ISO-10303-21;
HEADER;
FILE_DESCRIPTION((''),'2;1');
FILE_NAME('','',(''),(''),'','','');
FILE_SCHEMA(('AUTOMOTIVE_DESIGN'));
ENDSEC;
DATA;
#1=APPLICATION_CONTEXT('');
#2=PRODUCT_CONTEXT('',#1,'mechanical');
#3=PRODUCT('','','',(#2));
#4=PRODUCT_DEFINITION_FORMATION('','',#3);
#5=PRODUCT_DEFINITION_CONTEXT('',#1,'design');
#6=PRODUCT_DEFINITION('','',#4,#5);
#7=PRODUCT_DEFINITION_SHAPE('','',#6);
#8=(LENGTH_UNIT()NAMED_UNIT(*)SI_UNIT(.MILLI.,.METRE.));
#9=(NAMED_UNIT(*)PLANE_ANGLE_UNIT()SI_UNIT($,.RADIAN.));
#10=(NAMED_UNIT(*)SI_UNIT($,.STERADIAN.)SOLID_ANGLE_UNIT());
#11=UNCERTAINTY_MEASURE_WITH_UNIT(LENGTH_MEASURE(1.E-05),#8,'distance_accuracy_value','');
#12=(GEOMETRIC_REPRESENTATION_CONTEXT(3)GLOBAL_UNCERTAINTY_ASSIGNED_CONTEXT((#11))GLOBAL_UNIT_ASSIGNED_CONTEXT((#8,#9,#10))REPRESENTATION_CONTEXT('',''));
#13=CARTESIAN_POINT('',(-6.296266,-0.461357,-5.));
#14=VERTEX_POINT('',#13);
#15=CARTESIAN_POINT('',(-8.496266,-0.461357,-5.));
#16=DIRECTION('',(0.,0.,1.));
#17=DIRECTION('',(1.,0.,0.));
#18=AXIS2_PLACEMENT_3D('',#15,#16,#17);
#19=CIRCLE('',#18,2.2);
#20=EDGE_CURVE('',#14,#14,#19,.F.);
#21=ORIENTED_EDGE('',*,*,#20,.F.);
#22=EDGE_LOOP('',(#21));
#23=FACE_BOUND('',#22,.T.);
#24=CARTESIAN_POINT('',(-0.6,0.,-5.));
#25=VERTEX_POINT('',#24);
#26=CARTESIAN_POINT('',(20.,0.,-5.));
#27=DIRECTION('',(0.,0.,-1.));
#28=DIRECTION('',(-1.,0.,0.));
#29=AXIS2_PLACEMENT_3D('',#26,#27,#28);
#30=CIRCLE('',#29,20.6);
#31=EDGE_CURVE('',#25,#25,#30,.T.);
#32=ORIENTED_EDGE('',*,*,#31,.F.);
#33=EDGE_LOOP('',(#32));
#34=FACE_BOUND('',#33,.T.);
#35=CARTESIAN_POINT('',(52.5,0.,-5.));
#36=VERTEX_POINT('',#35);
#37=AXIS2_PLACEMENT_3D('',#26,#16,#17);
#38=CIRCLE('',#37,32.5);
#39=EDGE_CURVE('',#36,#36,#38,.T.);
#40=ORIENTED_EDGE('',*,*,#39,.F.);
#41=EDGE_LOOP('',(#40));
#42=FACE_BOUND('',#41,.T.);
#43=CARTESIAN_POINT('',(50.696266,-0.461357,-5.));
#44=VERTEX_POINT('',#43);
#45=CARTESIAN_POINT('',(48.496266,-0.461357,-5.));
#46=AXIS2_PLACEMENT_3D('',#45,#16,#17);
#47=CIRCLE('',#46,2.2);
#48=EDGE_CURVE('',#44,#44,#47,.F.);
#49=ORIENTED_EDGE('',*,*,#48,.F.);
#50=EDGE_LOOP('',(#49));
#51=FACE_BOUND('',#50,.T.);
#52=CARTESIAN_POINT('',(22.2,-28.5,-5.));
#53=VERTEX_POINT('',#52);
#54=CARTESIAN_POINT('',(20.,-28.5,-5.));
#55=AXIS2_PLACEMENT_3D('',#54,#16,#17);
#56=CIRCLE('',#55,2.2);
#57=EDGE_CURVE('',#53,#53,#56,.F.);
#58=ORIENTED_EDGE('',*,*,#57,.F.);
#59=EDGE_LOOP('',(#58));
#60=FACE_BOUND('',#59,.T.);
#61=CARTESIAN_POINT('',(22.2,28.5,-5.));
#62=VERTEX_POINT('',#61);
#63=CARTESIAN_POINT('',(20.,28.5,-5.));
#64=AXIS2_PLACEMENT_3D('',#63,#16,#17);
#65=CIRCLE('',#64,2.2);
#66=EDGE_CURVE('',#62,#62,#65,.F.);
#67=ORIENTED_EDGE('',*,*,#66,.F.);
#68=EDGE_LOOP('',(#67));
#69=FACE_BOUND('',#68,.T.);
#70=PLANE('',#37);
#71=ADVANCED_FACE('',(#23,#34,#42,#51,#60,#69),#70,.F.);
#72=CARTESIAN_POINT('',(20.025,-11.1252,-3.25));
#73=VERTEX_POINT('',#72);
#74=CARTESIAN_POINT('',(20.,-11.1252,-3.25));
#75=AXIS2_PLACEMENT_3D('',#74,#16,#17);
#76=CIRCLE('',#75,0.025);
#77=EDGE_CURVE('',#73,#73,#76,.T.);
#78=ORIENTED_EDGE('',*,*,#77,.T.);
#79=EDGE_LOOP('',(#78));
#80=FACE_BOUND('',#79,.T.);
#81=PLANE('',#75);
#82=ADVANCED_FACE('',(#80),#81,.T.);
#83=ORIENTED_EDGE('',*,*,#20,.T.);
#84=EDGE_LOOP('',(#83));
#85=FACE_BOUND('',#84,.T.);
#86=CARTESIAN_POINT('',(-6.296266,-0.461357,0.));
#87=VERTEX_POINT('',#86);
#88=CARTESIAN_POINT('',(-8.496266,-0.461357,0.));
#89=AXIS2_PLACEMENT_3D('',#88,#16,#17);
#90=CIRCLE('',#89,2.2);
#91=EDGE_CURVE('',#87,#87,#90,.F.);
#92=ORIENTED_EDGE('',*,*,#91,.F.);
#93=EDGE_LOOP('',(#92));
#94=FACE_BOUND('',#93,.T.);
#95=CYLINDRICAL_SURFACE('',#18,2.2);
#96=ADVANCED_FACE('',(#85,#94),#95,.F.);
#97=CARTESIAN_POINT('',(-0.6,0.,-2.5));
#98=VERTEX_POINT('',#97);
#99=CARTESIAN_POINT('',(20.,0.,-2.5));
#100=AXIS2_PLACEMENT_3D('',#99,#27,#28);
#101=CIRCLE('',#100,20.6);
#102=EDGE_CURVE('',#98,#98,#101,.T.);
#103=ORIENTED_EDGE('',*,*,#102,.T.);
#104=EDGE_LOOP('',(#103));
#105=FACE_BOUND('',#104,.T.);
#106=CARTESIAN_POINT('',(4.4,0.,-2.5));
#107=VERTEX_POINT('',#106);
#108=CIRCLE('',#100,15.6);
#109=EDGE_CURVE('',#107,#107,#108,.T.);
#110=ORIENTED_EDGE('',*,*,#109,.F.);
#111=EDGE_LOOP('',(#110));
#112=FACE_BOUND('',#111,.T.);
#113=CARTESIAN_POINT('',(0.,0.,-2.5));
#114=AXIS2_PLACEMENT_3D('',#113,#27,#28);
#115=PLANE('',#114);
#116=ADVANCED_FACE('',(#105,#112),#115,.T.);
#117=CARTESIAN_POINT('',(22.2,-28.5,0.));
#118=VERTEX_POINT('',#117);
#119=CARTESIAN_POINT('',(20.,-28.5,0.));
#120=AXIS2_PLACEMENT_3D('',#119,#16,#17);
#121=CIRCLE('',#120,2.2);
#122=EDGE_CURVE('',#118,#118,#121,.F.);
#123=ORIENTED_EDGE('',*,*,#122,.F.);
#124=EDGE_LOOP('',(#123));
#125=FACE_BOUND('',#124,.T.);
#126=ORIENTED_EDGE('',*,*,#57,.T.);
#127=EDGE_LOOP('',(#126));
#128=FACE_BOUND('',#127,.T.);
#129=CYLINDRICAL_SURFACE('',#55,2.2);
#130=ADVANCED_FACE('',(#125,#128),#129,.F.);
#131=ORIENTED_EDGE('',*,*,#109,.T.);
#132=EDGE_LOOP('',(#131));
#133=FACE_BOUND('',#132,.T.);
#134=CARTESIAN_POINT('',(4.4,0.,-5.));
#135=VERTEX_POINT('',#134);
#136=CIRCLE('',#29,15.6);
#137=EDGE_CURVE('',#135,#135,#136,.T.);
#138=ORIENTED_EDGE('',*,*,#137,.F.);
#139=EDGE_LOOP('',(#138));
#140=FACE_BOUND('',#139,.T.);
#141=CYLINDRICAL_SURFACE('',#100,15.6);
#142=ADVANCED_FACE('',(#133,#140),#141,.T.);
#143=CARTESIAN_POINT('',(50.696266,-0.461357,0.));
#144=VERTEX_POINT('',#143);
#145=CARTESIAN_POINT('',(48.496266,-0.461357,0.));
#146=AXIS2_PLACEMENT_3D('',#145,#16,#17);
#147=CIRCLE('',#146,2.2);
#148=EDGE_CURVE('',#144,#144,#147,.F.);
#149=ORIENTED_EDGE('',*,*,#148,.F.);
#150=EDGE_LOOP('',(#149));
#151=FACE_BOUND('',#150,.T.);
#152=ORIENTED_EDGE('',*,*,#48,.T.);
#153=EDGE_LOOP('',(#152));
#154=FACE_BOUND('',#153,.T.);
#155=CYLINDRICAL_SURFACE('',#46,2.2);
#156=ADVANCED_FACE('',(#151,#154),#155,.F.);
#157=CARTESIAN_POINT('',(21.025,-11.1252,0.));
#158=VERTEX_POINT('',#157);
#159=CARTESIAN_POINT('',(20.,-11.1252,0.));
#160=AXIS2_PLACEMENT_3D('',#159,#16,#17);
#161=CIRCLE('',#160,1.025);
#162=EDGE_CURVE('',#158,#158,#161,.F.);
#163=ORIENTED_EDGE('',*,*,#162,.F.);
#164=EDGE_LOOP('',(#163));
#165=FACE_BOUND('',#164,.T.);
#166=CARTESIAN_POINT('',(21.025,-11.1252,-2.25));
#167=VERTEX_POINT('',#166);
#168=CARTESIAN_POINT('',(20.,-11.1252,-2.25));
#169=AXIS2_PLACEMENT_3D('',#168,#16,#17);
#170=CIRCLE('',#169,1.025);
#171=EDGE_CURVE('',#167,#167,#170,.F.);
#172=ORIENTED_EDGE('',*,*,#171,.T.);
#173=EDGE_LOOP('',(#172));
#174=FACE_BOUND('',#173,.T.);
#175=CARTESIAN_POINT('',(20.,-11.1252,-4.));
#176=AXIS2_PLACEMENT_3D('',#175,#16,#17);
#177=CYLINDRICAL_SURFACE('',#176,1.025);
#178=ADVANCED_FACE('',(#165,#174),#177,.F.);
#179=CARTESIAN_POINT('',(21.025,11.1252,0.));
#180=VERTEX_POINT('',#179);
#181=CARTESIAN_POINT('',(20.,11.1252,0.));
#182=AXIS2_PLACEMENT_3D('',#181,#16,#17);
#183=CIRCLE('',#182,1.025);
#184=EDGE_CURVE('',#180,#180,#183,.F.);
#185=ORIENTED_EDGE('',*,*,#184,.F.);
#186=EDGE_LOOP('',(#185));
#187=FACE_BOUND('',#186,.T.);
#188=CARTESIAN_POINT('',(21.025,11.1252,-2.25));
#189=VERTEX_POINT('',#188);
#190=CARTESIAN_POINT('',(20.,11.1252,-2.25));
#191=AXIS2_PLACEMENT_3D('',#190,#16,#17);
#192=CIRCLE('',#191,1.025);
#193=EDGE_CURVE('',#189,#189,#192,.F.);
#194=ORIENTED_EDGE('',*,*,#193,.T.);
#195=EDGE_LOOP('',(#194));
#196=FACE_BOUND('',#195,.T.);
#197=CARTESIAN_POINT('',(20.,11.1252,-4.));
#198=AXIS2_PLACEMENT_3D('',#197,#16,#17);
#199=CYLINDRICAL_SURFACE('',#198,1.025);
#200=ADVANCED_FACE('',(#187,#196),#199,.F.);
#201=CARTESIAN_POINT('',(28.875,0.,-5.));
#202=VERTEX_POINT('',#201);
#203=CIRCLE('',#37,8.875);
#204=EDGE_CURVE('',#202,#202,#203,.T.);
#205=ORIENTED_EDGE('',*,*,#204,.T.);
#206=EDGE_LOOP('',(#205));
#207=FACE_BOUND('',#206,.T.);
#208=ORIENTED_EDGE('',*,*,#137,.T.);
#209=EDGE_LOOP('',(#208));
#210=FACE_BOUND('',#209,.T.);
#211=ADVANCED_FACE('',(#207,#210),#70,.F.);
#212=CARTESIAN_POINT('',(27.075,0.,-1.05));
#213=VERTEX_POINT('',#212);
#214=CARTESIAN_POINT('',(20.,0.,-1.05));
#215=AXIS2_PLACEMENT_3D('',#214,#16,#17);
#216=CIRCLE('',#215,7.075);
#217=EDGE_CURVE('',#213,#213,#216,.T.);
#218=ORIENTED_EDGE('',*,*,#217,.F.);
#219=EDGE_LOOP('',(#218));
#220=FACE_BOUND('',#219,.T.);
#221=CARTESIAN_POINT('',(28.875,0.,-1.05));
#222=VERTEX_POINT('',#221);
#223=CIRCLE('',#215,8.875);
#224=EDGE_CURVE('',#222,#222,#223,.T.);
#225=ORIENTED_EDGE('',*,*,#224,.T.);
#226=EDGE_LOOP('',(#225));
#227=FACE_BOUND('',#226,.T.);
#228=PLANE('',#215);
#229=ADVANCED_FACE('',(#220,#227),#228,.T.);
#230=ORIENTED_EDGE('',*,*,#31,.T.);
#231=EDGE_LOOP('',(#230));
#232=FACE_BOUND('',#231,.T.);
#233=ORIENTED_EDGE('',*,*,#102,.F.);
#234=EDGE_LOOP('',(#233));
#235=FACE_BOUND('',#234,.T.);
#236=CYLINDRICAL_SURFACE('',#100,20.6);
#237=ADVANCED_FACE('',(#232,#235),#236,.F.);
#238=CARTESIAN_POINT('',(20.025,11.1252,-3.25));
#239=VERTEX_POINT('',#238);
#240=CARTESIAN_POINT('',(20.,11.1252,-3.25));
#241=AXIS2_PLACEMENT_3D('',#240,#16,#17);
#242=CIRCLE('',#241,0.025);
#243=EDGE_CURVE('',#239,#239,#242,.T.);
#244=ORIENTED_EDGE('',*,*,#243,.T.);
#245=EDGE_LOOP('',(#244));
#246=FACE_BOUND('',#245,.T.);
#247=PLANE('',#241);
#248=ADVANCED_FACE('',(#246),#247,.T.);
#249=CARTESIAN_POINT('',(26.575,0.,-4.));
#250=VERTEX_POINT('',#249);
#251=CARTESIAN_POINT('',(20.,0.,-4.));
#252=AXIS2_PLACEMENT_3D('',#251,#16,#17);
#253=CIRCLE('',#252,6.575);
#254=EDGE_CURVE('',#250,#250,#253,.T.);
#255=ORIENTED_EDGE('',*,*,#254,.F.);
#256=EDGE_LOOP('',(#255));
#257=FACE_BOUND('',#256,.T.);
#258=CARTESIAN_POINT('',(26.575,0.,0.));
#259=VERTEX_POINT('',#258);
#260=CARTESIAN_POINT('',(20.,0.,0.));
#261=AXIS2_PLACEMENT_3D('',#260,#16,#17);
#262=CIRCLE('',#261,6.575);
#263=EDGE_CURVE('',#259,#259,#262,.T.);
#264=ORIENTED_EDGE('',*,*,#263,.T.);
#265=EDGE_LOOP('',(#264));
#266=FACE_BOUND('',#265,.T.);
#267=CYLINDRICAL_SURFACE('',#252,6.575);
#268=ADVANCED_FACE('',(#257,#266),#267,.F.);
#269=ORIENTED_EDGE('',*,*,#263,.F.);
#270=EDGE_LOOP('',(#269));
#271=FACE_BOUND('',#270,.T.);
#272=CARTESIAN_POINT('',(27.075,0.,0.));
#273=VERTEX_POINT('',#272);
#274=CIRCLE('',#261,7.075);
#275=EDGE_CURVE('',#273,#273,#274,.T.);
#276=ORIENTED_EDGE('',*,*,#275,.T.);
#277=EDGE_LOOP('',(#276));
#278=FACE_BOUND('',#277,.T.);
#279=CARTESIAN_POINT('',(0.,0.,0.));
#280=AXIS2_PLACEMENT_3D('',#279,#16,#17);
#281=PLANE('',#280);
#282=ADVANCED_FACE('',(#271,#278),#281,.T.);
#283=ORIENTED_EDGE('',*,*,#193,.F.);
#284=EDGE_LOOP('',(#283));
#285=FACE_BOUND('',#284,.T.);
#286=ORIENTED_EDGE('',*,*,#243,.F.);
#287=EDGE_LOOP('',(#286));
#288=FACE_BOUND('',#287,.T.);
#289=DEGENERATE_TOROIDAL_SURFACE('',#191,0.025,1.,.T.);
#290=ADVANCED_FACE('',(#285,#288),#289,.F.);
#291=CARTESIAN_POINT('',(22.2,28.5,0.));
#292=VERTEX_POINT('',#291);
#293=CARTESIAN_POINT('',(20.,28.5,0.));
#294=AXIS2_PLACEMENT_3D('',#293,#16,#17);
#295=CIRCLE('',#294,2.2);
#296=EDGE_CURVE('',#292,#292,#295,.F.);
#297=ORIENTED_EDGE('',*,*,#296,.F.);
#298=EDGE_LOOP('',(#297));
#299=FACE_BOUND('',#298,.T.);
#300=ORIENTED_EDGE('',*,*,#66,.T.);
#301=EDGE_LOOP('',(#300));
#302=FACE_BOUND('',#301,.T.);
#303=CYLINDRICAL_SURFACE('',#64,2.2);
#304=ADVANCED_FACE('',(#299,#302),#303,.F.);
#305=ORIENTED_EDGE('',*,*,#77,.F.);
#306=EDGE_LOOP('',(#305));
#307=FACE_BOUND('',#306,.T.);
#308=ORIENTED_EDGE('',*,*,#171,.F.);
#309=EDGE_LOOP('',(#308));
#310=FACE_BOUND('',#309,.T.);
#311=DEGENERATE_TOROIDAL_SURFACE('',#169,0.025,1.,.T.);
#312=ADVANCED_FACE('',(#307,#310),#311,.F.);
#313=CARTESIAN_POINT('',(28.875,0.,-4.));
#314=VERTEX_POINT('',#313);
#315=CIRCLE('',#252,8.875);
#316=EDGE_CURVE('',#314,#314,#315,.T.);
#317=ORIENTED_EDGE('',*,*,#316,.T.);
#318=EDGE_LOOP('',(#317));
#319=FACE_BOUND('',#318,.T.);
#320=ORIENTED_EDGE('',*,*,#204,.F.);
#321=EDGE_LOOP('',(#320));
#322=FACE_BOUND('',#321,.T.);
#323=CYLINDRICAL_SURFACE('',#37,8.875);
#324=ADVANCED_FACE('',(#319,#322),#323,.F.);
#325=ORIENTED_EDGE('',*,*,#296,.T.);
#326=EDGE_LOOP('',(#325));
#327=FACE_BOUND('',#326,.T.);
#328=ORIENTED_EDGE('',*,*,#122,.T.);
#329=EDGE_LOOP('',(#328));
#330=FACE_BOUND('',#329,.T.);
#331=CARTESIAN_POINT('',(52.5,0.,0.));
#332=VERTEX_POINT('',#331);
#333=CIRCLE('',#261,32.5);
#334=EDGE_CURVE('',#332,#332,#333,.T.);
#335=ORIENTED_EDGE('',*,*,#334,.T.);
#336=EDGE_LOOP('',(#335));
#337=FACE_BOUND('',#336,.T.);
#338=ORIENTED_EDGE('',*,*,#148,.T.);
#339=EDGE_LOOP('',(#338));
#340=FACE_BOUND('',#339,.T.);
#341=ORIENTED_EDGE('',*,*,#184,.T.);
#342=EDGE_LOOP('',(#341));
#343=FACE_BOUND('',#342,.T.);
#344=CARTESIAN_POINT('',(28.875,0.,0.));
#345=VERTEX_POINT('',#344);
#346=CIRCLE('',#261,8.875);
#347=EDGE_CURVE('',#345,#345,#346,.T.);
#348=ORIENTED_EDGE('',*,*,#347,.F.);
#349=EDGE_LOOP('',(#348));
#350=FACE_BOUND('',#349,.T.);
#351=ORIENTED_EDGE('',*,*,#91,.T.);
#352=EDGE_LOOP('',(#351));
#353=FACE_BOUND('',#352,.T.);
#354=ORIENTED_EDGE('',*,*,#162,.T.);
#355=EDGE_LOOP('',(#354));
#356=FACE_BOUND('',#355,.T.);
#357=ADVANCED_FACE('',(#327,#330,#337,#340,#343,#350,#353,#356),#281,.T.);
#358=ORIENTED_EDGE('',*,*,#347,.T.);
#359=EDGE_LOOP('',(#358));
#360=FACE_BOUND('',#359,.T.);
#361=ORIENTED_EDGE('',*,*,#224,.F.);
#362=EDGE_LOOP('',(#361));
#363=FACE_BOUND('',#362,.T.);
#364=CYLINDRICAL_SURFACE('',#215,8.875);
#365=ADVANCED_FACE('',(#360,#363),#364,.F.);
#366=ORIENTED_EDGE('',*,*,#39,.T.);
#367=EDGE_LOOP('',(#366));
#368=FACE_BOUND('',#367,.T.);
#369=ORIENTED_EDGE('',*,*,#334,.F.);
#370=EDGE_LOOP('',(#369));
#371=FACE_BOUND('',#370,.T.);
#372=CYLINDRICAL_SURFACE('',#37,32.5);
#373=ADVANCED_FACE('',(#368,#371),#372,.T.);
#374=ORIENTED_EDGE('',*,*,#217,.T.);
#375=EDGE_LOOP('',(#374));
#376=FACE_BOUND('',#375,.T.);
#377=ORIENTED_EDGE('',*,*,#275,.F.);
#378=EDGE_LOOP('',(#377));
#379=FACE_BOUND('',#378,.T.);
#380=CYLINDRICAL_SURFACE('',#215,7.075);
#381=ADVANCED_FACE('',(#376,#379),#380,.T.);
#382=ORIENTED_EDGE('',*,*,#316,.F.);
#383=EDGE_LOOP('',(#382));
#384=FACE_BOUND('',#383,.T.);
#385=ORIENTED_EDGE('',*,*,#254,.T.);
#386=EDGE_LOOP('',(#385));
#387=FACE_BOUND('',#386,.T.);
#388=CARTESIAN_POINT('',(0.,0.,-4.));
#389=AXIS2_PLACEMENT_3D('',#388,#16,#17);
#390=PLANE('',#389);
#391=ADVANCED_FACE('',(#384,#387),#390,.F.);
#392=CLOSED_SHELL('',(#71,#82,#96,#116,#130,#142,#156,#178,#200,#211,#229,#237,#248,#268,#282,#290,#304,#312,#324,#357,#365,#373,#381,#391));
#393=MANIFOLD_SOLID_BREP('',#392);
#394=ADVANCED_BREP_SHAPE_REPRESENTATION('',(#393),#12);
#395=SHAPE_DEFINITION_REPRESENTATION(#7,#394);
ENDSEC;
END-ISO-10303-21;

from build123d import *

# Parameters (mm, degrees)
BOSS_EXTRUDE1_START       = -4
BOSS_EXTRUDE1_OUTLINE_R   = 2.2
BOSS_EXTRUDE1_OUTLINE_R_2 = 1.025
BOSS_EXTRUDE1_OUTLINE_R_3 = 6.575
BOSS_EXTRUDE1_DEPTH       = 4
SKETCH3_R                 = 8.875
SKETCH3_R_2               = 7.075
CUT_EXTRUDE1_DEPTH        = 1.05
BOSS_EXTRUDE2_START       = -4
SKETCH4_R                 = 1.025
BOSS_EXTRUDE2_DEPTH       = 0.75
FILLET1_R                 = 1
BOSS_EXTRUDE3_START       = -5
SKETCH5_R                 = 32.5
SKETCH5_R_2               = 1.025
SKETCH5_R_3               = 8.875
BOSS_EXTRUDE3_DEPTH       = 5
SKETCH6_R                 = 2.2
CUT_EXTRUDE2_DEPTH        = 5
SKETCH7_R                 = 20.6
SKETCH7_R_2               = 15.6
CUT_EXTRUDE3_DEPTH        = 2.5
BOSS_EXTRUDE4_START       = 1
SKETCH8_R                 = 1.025
BOSS_EXTRUDE4_DEPTH       = 1


# Read off the part's stored shape, not the designer's step: Boss-Extrude1
with BuildPart() as part:
    # Boss-Extrude1 outline → Boss-Extrude1 (new body)
    with BuildSketch(Plane.XY.offset(BOSS_EXTRUDE1_START)):
        with BuildLine():
            Line((-5.8, 12.8), (-5.8, -12.8))
            ThreePointArc((-5.8, -12.8), (-1.992388155, -21.992388155), (7.2, -25.8))
            Line((7.2, -25.8), (32.8, -25.8))
            ThreePointArc((32.8, -25.8), (41.992388155, -21.992388155), (45.8, -12.8))
            Line((45.8, -12.8), (45.8, 12.8))
            ThreePointArc((45.8, 12.8), (41.992388155, 21.992388155), (32.8, 25.8))
            Line((32.8, 25.8), (7.2, 25.8))
            ThreePointArc((7.2, 25.8), (-1.992388155, 21.992388155), (-5.8, 12.8))
        make_face()
        with Locations((25, -22)):
            Circle(BOSS_EXTRUDE1_OUTLINE_R, mode=Mode.SUBTRACT)
        with Locations((20, -11.1252)):
            Circle(BOSS_EXTRUDE1_OUTLINE_R_2, mode=Mode.SUBTRACT)
        with Locations((-2, 0)):
            Circle(BOSS_EXTRUDE1_OUTLINE_R, mode=Mode.SUBTRACT)
        with Locations((20, 0)):
            Circle(BOSS_EXTRUDE1_OUTLINE_R_3, mode=Mode.SUBTRACT)
        with Locations((20, 11.1252)):
            Circle(BOSS_EXTRUDE1_OUTLINE_R_2, mode=Mode.SUBTRACT)
        with Locations((42, 0)):
            Circle(BOSS_EXTRUDE1_OUTLINE_R, mode=Mode.SUBTRACT)
        with Locations((25, 22)):
            Circle(BOSS_EXTRUDE1_OUTLINE_R, mode=Mode.SUBTRACT)
    extrude(amount=BOSS_EXTRUDE1_DEPTH)

    # Sketch3 → Cut-Extrude1 (cut)
    with BuildSketch(Plane.XY):
        with Locations((20, 0)):
            Circle(SKETCH3_R)
        with Locations((20, 0)):
            Circle(SKETCH3_R_2, mode=Mode.SUBTRACT)
    extrude(amount=-CUT_EXTRUDE1_DEPTH, mode=Mode.SUBTRACT)

    # Sketch4 → Boss-Extrude2 (add)
    with BuildSketch(Plane.XY.offset(BOSS_EXTRUDE2_START)):
        with Locations((20, 11.1252)):
            Circle(SKETCH4_R)
        with Locations((20, -11.1252)):
            Circle(SKETCH4_R)
    extrude(amount=BOSS_EXTRUDE2_DEPTH)

    # Fillet1
    fillet1_edges = [part.edges().sort_by_distance(p)[0] for p in [
        (18.975, 11.1252, -3.25),
        (18.975, -11.1252, -3.25),
    ]]
    fillet(fillet1_edges, radius=FILLET1_R)

    # Sketch5 → Boss-Extrude3 (add)
    with BuildSketch(Plane.XY.offset(BOSS_EXTRUDE3_START)):
        with Locations((20, 0)):
            Circle(SKETCH5_R)
        with Locations((20, -11.1252)):
            Circle(SKETCH5_R_2, mode=Mode.SUBTRACT)
        with Locations((20, 11.1252)):
            Circle(SKETCH5_R_2, mode=Mode.SUBTRACT)
        with Locations((20, 0)):
            Circle(SKETCH5_R_3, mode=Mode.SUBTRACT)
    extrude(amount=BOSS_EXTRUDE3_DEPTH)

    # Sketch6 → Cut-Extrude2 (cut)
    with BuildSketch(Plane.XY):
        with Locations((-8.496265533, -0.461357402)):
            Circle(SKETCH6_R)
        with Locations((20, 28.5)):
            Circle(SKETCH6_R)
        with Locations((48.496265533, -0.461357402)):
            Circle(SKETCH6_R)
        with Locations((20, -28.5)):
            Circle(SKETCH6_R)
    extrude(amount=-CUT_EXTRUDE2_DEPTH, mode=Mode.SUBTRACT)

    # Sketch7 → Cut-Extrude3 (cut)
    with BuildSketch(Plane(origin=(0, 0, -5), x_dir=(-1, 0, 0), z_dir=(0, 0, -1))):
        with Locations((-20, 0)):
            Circle(SKETCH7_R)
        with Locations((-20, 0)):
            Circle(SKETCH7_R_2, mode=Mode.SUBTRACT)
    extrude(amount=-CUT_EXTRUDE3_DEPTH, mode=Mode.SUBTRACT)

    # Sketch8 → Boss-Extrude4 (add)
    with BuildSketch(Plane(origin=(0, 0, -4), x_dir=(-1, 0, 0), z_dir=(0, 0, -1)).offset(BOSS_EXTRUDE4_START)):
        with Locations(Location((-20, -11.1252, 0), (0, 0, 180))):
            Circle(SKETCH8_R)
        with Locations(Location((-20, 11.1252, 0), (0, 0, 180))):
            Circle(SKETCH8_R)
    extrude(amount=-BOSS_EXTRUDE4_DEPTH)


solid = part.part
